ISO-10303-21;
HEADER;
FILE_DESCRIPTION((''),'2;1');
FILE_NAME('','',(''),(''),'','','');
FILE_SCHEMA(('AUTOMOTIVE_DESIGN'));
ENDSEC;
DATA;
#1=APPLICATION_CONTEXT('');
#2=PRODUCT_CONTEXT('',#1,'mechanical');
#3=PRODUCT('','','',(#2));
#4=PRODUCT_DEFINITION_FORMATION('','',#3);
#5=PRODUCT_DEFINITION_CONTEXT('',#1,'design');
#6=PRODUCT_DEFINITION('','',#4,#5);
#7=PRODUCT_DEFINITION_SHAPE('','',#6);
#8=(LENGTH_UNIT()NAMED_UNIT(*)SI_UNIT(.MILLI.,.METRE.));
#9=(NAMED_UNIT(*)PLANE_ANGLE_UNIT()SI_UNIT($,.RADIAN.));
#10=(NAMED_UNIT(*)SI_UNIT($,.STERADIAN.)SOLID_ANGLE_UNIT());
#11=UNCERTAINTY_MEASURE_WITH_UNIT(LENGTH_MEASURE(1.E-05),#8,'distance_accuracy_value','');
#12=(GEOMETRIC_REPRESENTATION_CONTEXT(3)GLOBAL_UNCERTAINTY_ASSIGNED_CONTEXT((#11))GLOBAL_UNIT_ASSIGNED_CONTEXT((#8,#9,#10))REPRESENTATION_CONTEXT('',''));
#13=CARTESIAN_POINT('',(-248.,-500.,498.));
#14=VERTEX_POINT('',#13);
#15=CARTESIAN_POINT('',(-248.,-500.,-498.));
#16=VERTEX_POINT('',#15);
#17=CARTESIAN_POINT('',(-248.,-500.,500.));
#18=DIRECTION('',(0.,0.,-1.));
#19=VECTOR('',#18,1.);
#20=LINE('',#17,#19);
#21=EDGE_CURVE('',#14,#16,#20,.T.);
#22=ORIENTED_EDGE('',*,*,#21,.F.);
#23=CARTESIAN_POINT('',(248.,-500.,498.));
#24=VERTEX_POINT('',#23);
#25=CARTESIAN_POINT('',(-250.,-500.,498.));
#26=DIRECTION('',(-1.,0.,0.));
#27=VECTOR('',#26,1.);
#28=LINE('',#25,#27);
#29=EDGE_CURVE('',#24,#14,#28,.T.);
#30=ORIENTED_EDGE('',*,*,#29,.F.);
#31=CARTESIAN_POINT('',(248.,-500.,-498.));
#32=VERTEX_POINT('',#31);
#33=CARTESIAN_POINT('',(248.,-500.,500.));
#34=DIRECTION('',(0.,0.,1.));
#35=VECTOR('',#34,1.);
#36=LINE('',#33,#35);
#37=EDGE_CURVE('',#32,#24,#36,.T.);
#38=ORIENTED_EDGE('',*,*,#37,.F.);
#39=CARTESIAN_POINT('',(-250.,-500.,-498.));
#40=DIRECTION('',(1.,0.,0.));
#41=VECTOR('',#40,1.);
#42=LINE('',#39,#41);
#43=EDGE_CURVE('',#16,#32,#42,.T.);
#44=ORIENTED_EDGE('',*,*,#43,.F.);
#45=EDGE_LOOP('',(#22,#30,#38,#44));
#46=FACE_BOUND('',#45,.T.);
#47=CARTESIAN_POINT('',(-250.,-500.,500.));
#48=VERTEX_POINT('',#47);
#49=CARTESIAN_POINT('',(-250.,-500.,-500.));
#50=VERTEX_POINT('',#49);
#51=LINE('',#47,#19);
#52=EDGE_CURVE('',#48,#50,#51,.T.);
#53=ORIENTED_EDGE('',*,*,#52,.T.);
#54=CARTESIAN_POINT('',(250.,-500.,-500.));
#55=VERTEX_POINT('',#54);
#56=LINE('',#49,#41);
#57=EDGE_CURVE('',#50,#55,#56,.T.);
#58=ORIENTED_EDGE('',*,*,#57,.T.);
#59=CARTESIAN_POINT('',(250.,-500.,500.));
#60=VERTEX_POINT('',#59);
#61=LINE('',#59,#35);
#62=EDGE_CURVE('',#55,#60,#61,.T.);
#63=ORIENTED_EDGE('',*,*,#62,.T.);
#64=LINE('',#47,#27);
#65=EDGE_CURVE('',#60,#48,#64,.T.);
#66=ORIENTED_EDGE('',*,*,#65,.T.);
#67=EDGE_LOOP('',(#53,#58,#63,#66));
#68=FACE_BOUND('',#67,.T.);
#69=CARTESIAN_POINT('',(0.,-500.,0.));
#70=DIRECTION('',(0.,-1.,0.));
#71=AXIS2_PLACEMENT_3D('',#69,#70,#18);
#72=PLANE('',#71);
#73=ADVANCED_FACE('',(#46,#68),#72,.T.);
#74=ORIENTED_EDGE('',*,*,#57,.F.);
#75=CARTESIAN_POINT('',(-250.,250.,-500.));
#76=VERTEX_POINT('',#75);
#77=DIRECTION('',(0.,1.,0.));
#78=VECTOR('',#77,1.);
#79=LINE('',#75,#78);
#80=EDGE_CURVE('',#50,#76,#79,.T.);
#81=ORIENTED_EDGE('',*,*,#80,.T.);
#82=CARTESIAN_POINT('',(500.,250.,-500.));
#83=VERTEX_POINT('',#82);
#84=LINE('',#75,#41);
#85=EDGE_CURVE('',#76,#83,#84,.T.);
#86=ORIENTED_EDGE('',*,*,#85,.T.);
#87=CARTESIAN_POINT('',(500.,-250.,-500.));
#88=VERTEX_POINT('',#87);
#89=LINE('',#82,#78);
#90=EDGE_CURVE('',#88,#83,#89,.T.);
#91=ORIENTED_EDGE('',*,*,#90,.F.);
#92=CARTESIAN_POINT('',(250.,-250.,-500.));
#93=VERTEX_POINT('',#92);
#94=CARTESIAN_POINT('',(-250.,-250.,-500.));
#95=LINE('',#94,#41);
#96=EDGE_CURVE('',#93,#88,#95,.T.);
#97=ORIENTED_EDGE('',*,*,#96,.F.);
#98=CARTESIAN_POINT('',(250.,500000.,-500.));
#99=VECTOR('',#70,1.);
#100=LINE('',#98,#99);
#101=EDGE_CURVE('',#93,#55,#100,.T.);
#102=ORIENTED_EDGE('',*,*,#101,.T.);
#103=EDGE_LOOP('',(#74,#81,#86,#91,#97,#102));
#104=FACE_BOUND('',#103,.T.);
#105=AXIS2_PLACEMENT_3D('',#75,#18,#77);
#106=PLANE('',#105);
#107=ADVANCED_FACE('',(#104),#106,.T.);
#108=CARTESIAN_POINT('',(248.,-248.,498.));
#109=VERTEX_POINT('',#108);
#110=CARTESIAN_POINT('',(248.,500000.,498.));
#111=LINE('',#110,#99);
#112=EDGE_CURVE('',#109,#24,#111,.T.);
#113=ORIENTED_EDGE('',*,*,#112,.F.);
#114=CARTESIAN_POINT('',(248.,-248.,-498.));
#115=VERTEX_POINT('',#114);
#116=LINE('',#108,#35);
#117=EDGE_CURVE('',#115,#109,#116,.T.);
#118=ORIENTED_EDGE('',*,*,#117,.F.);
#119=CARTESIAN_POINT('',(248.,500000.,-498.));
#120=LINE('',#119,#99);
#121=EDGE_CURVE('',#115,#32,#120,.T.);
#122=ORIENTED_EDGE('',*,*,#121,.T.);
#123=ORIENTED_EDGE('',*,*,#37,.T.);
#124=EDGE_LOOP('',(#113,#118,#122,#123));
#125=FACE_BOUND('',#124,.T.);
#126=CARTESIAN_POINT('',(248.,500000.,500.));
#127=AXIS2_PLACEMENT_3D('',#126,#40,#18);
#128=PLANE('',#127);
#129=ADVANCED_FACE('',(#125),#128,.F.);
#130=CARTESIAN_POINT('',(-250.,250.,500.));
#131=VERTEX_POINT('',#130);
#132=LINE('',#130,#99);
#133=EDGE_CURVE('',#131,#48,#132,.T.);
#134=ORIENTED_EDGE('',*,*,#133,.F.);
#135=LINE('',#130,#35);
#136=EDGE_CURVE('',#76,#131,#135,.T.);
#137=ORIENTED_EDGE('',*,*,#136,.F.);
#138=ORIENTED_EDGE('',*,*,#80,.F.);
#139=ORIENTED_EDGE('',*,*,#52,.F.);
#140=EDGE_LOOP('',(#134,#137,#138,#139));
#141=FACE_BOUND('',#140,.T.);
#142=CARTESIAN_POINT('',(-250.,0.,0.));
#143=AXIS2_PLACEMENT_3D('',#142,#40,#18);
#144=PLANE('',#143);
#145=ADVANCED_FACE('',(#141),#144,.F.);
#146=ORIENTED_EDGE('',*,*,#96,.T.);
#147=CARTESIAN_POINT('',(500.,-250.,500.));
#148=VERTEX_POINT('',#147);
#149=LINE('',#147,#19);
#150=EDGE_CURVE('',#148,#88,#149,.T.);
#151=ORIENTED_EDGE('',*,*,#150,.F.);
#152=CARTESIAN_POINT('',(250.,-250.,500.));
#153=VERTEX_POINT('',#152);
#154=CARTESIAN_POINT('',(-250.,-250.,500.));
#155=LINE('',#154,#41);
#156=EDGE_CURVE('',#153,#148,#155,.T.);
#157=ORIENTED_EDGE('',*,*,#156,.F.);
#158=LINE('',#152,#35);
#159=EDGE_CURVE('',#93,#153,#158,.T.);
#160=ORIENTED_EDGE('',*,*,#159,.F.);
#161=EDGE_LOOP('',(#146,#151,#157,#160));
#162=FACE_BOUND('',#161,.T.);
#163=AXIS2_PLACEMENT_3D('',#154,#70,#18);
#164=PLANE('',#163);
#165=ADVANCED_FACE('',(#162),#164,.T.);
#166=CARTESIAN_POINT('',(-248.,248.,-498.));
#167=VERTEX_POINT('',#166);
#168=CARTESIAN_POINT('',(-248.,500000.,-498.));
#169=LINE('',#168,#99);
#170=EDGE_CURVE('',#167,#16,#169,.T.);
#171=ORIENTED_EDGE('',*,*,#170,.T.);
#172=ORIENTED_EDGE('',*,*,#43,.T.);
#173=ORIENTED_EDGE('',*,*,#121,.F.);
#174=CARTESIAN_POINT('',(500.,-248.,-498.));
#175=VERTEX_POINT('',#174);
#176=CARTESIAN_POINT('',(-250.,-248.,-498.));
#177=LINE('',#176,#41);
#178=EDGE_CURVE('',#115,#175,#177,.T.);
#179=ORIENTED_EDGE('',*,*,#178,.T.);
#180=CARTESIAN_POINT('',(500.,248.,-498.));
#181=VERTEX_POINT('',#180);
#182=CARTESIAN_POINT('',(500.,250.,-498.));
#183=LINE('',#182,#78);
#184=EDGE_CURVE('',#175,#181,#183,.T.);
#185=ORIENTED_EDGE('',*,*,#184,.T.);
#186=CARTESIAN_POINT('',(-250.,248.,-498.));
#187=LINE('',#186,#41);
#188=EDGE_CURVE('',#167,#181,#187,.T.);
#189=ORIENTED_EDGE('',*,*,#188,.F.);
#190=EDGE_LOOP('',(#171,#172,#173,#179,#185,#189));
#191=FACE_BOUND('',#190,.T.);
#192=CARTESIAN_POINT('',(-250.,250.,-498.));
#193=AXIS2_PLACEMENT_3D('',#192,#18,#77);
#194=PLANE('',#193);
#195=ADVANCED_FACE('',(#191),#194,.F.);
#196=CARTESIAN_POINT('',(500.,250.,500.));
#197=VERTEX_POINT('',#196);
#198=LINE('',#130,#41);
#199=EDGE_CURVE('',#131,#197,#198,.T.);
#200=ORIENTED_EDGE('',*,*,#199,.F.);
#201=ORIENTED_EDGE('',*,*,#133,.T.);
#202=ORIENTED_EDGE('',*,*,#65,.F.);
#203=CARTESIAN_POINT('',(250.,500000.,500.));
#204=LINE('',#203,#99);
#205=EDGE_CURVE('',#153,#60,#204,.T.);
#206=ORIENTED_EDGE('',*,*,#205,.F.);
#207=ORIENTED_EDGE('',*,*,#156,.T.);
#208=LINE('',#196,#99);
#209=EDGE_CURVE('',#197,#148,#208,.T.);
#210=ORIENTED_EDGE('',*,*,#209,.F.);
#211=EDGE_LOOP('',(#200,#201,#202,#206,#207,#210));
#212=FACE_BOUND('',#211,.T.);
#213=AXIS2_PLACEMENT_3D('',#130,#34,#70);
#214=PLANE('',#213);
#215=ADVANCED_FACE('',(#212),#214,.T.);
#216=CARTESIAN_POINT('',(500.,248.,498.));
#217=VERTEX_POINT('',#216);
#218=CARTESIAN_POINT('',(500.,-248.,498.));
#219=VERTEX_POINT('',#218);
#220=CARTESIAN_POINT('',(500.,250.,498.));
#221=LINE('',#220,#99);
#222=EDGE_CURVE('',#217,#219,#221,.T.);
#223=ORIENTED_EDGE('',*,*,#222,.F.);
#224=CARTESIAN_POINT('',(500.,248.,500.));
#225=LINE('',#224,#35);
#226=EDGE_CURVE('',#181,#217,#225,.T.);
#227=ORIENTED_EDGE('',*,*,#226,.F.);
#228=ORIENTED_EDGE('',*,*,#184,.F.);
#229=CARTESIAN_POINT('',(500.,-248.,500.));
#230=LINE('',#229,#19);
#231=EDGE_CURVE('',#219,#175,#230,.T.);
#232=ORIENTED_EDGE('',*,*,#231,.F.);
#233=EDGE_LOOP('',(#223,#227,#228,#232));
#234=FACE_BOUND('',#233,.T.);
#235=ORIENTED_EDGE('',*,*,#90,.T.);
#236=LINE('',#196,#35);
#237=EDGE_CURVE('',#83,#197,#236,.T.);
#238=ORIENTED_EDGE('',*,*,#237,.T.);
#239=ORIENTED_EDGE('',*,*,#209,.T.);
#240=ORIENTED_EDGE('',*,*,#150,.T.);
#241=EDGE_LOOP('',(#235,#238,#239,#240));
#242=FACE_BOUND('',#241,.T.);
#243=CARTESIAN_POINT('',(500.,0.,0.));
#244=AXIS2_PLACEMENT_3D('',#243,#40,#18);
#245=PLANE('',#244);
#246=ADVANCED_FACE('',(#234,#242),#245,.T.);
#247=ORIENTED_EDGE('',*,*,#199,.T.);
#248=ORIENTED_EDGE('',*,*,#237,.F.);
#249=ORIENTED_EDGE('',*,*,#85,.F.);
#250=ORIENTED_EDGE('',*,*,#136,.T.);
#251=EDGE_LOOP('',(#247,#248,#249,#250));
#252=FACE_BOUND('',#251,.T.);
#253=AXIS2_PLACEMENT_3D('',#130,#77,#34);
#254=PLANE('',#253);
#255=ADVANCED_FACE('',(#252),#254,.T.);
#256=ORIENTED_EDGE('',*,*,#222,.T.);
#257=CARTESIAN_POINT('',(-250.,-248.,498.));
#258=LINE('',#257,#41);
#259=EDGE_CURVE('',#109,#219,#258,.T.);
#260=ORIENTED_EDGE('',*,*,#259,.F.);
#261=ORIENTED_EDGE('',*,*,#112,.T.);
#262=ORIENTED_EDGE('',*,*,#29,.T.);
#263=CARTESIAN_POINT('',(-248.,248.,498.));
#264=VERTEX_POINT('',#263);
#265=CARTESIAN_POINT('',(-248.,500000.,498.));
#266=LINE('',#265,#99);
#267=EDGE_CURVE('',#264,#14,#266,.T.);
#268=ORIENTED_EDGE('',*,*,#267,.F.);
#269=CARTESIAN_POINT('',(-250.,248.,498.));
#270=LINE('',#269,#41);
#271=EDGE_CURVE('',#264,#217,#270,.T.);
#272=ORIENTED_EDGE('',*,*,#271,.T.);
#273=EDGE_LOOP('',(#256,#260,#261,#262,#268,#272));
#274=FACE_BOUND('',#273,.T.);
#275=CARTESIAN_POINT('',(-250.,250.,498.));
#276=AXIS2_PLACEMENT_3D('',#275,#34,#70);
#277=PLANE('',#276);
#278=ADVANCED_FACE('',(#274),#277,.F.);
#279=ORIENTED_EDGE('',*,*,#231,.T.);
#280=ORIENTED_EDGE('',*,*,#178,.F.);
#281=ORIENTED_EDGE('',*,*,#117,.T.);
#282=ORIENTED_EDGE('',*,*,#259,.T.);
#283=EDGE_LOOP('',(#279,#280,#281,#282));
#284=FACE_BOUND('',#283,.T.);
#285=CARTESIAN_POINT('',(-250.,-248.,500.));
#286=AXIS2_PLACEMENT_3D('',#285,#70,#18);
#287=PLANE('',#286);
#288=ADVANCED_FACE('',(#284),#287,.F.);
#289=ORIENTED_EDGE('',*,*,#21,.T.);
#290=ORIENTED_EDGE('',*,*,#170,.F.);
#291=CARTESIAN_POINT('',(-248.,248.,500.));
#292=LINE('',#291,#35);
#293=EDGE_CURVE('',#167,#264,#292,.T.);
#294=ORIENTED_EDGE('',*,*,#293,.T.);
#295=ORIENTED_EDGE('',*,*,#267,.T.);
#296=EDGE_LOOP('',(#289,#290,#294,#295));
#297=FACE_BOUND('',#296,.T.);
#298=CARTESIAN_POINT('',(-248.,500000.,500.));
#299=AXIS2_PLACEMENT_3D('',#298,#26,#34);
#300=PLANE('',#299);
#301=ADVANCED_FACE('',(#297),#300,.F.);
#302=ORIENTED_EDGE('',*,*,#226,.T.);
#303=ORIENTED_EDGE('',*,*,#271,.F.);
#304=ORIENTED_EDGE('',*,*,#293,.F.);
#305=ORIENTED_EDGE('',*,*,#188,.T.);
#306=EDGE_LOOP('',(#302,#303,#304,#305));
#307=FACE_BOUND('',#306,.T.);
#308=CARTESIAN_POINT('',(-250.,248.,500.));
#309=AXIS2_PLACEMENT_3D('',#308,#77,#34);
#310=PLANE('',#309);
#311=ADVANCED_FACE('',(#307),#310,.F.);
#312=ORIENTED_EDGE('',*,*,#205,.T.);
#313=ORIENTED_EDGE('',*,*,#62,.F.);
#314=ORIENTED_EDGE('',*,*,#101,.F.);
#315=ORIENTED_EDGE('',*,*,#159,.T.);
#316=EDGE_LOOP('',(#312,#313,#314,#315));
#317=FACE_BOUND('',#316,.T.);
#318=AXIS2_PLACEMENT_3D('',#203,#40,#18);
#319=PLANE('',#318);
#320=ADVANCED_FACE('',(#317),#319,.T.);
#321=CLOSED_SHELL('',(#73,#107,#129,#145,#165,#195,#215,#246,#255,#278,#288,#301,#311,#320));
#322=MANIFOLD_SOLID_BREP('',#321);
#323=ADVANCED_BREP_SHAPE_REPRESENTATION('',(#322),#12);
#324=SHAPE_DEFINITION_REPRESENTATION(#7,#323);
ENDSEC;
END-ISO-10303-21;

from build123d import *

# Parameters (mm, degrees)
EXTRUDE_THIN1_START       = -250
EXTRUDE_THIN1_OUTLINE_W   = 1000
EXTRUDE_THIN1_OUTLINE_H   = 500
EXTRUDE_THIN1_OUTLINE_W_2 = 996
EXTRUDE_THIN1_OUTLINE_H_2 = 496
EXTRUDE_THIN1_DEPTH       = 750
EXTRUDE_THIN2_START       = -498
SKETCH2_W                 = 500
SKETCH2_H                 = 1000
SKETCH2_W_2               = 496
SKETCH2_H_2               = 996
EXTRUDE_THIN2_DEPTH       = 748
CUT_EXTRUDE1_REACH        = 1032.776
SKETCH3_W                 = 496
SKETCH3_H                 = 996
CUT_EXTRUDE2_REACH        = 1032.776
SKETCH4_W                 = 996
SKETCH4_H                 = 496


# Read off the part's stored shape, not the designer's step: Extrude-Thin1
with BuildPart() as part:
    # Extrude-Thin1 outline → Extrude-Thin1 (new body)
    with BuildSketch(Plane(origin=(0, 0, 0), x_dir=(0, 0, -1), z_dir=(1, 0, 0)).offset(EXTRUDE_THIN1_START)):
        Rectangle(EXTRUDE_THIN1_OUTLINE_W, EXTRUDE_THIN1_OUTLINE_H)
        Rectangle(EXTRUDE_THIN1_OUTLINE_W_2, EXTRUDE_THIN1_OUTLINE_H_2, mode=Mode.SUBTRACT)
    extrude(amount=EXTRUDE_THIN1_DEPTH)

    # Sketch2 → Extrude-Thin2 (add)
    with BuildSketch(Plane.XZ.offset(250).offset(EXTRUDE_THIN2_START)):
        Rectangle(SKETCH2_W, SKETCH2_H)
        Rectangle(SKETCH2_W_2, SKETCH2_H_2, mode=Mode.SUBTRACT)
    extrude(amount=EXTRUDE_THIN2_DEPTH)

    # Sketch3 → Cut-Extrude1 (cut, up to next)
    with BuildSketch(Plane.XZ.offset(500), mode=Mode.PRIVATE) as cut_extrude1_sk1:
        Rectangle(SKETCH3_W, SKETCH3_H)
    cut_extrude1_tool1 = extrude(cut_extrude1_sk1.sketch, amount=-CUT_EXTRUDE1_REACH, mode=Mode.PRIVATE) & part.part
    add(cut_extrude1_tool1.solids().sort_by_distance((0, -500, 0))[0], mode=Mode.SUBTRACT)

    # Sketch4 → Cut-Extrude2 (cut, up to next)
    with BuildSketch(Plane(origin=(500, 0, 0), x_dir=(0, 0, -1), z_dir=(1, 0, 0)), mode=Mode.PRIVATE) as cut_extrude2_sk1:
        Rectangle(SKETCH4_W, SKETCH4_H)
    cut_extrude2_tool1 = extrude(cut_extrude2_sk1.sketch, amount=-CUT_EXTRUDE2_REACH, mode=Mode.PRIVATE) & part.part
    add(cut_extrude2_tool1.solids().sort_by_distance((500, 0, 0))[0], mode=Mode.SUBTRACT)


solid = part.part
